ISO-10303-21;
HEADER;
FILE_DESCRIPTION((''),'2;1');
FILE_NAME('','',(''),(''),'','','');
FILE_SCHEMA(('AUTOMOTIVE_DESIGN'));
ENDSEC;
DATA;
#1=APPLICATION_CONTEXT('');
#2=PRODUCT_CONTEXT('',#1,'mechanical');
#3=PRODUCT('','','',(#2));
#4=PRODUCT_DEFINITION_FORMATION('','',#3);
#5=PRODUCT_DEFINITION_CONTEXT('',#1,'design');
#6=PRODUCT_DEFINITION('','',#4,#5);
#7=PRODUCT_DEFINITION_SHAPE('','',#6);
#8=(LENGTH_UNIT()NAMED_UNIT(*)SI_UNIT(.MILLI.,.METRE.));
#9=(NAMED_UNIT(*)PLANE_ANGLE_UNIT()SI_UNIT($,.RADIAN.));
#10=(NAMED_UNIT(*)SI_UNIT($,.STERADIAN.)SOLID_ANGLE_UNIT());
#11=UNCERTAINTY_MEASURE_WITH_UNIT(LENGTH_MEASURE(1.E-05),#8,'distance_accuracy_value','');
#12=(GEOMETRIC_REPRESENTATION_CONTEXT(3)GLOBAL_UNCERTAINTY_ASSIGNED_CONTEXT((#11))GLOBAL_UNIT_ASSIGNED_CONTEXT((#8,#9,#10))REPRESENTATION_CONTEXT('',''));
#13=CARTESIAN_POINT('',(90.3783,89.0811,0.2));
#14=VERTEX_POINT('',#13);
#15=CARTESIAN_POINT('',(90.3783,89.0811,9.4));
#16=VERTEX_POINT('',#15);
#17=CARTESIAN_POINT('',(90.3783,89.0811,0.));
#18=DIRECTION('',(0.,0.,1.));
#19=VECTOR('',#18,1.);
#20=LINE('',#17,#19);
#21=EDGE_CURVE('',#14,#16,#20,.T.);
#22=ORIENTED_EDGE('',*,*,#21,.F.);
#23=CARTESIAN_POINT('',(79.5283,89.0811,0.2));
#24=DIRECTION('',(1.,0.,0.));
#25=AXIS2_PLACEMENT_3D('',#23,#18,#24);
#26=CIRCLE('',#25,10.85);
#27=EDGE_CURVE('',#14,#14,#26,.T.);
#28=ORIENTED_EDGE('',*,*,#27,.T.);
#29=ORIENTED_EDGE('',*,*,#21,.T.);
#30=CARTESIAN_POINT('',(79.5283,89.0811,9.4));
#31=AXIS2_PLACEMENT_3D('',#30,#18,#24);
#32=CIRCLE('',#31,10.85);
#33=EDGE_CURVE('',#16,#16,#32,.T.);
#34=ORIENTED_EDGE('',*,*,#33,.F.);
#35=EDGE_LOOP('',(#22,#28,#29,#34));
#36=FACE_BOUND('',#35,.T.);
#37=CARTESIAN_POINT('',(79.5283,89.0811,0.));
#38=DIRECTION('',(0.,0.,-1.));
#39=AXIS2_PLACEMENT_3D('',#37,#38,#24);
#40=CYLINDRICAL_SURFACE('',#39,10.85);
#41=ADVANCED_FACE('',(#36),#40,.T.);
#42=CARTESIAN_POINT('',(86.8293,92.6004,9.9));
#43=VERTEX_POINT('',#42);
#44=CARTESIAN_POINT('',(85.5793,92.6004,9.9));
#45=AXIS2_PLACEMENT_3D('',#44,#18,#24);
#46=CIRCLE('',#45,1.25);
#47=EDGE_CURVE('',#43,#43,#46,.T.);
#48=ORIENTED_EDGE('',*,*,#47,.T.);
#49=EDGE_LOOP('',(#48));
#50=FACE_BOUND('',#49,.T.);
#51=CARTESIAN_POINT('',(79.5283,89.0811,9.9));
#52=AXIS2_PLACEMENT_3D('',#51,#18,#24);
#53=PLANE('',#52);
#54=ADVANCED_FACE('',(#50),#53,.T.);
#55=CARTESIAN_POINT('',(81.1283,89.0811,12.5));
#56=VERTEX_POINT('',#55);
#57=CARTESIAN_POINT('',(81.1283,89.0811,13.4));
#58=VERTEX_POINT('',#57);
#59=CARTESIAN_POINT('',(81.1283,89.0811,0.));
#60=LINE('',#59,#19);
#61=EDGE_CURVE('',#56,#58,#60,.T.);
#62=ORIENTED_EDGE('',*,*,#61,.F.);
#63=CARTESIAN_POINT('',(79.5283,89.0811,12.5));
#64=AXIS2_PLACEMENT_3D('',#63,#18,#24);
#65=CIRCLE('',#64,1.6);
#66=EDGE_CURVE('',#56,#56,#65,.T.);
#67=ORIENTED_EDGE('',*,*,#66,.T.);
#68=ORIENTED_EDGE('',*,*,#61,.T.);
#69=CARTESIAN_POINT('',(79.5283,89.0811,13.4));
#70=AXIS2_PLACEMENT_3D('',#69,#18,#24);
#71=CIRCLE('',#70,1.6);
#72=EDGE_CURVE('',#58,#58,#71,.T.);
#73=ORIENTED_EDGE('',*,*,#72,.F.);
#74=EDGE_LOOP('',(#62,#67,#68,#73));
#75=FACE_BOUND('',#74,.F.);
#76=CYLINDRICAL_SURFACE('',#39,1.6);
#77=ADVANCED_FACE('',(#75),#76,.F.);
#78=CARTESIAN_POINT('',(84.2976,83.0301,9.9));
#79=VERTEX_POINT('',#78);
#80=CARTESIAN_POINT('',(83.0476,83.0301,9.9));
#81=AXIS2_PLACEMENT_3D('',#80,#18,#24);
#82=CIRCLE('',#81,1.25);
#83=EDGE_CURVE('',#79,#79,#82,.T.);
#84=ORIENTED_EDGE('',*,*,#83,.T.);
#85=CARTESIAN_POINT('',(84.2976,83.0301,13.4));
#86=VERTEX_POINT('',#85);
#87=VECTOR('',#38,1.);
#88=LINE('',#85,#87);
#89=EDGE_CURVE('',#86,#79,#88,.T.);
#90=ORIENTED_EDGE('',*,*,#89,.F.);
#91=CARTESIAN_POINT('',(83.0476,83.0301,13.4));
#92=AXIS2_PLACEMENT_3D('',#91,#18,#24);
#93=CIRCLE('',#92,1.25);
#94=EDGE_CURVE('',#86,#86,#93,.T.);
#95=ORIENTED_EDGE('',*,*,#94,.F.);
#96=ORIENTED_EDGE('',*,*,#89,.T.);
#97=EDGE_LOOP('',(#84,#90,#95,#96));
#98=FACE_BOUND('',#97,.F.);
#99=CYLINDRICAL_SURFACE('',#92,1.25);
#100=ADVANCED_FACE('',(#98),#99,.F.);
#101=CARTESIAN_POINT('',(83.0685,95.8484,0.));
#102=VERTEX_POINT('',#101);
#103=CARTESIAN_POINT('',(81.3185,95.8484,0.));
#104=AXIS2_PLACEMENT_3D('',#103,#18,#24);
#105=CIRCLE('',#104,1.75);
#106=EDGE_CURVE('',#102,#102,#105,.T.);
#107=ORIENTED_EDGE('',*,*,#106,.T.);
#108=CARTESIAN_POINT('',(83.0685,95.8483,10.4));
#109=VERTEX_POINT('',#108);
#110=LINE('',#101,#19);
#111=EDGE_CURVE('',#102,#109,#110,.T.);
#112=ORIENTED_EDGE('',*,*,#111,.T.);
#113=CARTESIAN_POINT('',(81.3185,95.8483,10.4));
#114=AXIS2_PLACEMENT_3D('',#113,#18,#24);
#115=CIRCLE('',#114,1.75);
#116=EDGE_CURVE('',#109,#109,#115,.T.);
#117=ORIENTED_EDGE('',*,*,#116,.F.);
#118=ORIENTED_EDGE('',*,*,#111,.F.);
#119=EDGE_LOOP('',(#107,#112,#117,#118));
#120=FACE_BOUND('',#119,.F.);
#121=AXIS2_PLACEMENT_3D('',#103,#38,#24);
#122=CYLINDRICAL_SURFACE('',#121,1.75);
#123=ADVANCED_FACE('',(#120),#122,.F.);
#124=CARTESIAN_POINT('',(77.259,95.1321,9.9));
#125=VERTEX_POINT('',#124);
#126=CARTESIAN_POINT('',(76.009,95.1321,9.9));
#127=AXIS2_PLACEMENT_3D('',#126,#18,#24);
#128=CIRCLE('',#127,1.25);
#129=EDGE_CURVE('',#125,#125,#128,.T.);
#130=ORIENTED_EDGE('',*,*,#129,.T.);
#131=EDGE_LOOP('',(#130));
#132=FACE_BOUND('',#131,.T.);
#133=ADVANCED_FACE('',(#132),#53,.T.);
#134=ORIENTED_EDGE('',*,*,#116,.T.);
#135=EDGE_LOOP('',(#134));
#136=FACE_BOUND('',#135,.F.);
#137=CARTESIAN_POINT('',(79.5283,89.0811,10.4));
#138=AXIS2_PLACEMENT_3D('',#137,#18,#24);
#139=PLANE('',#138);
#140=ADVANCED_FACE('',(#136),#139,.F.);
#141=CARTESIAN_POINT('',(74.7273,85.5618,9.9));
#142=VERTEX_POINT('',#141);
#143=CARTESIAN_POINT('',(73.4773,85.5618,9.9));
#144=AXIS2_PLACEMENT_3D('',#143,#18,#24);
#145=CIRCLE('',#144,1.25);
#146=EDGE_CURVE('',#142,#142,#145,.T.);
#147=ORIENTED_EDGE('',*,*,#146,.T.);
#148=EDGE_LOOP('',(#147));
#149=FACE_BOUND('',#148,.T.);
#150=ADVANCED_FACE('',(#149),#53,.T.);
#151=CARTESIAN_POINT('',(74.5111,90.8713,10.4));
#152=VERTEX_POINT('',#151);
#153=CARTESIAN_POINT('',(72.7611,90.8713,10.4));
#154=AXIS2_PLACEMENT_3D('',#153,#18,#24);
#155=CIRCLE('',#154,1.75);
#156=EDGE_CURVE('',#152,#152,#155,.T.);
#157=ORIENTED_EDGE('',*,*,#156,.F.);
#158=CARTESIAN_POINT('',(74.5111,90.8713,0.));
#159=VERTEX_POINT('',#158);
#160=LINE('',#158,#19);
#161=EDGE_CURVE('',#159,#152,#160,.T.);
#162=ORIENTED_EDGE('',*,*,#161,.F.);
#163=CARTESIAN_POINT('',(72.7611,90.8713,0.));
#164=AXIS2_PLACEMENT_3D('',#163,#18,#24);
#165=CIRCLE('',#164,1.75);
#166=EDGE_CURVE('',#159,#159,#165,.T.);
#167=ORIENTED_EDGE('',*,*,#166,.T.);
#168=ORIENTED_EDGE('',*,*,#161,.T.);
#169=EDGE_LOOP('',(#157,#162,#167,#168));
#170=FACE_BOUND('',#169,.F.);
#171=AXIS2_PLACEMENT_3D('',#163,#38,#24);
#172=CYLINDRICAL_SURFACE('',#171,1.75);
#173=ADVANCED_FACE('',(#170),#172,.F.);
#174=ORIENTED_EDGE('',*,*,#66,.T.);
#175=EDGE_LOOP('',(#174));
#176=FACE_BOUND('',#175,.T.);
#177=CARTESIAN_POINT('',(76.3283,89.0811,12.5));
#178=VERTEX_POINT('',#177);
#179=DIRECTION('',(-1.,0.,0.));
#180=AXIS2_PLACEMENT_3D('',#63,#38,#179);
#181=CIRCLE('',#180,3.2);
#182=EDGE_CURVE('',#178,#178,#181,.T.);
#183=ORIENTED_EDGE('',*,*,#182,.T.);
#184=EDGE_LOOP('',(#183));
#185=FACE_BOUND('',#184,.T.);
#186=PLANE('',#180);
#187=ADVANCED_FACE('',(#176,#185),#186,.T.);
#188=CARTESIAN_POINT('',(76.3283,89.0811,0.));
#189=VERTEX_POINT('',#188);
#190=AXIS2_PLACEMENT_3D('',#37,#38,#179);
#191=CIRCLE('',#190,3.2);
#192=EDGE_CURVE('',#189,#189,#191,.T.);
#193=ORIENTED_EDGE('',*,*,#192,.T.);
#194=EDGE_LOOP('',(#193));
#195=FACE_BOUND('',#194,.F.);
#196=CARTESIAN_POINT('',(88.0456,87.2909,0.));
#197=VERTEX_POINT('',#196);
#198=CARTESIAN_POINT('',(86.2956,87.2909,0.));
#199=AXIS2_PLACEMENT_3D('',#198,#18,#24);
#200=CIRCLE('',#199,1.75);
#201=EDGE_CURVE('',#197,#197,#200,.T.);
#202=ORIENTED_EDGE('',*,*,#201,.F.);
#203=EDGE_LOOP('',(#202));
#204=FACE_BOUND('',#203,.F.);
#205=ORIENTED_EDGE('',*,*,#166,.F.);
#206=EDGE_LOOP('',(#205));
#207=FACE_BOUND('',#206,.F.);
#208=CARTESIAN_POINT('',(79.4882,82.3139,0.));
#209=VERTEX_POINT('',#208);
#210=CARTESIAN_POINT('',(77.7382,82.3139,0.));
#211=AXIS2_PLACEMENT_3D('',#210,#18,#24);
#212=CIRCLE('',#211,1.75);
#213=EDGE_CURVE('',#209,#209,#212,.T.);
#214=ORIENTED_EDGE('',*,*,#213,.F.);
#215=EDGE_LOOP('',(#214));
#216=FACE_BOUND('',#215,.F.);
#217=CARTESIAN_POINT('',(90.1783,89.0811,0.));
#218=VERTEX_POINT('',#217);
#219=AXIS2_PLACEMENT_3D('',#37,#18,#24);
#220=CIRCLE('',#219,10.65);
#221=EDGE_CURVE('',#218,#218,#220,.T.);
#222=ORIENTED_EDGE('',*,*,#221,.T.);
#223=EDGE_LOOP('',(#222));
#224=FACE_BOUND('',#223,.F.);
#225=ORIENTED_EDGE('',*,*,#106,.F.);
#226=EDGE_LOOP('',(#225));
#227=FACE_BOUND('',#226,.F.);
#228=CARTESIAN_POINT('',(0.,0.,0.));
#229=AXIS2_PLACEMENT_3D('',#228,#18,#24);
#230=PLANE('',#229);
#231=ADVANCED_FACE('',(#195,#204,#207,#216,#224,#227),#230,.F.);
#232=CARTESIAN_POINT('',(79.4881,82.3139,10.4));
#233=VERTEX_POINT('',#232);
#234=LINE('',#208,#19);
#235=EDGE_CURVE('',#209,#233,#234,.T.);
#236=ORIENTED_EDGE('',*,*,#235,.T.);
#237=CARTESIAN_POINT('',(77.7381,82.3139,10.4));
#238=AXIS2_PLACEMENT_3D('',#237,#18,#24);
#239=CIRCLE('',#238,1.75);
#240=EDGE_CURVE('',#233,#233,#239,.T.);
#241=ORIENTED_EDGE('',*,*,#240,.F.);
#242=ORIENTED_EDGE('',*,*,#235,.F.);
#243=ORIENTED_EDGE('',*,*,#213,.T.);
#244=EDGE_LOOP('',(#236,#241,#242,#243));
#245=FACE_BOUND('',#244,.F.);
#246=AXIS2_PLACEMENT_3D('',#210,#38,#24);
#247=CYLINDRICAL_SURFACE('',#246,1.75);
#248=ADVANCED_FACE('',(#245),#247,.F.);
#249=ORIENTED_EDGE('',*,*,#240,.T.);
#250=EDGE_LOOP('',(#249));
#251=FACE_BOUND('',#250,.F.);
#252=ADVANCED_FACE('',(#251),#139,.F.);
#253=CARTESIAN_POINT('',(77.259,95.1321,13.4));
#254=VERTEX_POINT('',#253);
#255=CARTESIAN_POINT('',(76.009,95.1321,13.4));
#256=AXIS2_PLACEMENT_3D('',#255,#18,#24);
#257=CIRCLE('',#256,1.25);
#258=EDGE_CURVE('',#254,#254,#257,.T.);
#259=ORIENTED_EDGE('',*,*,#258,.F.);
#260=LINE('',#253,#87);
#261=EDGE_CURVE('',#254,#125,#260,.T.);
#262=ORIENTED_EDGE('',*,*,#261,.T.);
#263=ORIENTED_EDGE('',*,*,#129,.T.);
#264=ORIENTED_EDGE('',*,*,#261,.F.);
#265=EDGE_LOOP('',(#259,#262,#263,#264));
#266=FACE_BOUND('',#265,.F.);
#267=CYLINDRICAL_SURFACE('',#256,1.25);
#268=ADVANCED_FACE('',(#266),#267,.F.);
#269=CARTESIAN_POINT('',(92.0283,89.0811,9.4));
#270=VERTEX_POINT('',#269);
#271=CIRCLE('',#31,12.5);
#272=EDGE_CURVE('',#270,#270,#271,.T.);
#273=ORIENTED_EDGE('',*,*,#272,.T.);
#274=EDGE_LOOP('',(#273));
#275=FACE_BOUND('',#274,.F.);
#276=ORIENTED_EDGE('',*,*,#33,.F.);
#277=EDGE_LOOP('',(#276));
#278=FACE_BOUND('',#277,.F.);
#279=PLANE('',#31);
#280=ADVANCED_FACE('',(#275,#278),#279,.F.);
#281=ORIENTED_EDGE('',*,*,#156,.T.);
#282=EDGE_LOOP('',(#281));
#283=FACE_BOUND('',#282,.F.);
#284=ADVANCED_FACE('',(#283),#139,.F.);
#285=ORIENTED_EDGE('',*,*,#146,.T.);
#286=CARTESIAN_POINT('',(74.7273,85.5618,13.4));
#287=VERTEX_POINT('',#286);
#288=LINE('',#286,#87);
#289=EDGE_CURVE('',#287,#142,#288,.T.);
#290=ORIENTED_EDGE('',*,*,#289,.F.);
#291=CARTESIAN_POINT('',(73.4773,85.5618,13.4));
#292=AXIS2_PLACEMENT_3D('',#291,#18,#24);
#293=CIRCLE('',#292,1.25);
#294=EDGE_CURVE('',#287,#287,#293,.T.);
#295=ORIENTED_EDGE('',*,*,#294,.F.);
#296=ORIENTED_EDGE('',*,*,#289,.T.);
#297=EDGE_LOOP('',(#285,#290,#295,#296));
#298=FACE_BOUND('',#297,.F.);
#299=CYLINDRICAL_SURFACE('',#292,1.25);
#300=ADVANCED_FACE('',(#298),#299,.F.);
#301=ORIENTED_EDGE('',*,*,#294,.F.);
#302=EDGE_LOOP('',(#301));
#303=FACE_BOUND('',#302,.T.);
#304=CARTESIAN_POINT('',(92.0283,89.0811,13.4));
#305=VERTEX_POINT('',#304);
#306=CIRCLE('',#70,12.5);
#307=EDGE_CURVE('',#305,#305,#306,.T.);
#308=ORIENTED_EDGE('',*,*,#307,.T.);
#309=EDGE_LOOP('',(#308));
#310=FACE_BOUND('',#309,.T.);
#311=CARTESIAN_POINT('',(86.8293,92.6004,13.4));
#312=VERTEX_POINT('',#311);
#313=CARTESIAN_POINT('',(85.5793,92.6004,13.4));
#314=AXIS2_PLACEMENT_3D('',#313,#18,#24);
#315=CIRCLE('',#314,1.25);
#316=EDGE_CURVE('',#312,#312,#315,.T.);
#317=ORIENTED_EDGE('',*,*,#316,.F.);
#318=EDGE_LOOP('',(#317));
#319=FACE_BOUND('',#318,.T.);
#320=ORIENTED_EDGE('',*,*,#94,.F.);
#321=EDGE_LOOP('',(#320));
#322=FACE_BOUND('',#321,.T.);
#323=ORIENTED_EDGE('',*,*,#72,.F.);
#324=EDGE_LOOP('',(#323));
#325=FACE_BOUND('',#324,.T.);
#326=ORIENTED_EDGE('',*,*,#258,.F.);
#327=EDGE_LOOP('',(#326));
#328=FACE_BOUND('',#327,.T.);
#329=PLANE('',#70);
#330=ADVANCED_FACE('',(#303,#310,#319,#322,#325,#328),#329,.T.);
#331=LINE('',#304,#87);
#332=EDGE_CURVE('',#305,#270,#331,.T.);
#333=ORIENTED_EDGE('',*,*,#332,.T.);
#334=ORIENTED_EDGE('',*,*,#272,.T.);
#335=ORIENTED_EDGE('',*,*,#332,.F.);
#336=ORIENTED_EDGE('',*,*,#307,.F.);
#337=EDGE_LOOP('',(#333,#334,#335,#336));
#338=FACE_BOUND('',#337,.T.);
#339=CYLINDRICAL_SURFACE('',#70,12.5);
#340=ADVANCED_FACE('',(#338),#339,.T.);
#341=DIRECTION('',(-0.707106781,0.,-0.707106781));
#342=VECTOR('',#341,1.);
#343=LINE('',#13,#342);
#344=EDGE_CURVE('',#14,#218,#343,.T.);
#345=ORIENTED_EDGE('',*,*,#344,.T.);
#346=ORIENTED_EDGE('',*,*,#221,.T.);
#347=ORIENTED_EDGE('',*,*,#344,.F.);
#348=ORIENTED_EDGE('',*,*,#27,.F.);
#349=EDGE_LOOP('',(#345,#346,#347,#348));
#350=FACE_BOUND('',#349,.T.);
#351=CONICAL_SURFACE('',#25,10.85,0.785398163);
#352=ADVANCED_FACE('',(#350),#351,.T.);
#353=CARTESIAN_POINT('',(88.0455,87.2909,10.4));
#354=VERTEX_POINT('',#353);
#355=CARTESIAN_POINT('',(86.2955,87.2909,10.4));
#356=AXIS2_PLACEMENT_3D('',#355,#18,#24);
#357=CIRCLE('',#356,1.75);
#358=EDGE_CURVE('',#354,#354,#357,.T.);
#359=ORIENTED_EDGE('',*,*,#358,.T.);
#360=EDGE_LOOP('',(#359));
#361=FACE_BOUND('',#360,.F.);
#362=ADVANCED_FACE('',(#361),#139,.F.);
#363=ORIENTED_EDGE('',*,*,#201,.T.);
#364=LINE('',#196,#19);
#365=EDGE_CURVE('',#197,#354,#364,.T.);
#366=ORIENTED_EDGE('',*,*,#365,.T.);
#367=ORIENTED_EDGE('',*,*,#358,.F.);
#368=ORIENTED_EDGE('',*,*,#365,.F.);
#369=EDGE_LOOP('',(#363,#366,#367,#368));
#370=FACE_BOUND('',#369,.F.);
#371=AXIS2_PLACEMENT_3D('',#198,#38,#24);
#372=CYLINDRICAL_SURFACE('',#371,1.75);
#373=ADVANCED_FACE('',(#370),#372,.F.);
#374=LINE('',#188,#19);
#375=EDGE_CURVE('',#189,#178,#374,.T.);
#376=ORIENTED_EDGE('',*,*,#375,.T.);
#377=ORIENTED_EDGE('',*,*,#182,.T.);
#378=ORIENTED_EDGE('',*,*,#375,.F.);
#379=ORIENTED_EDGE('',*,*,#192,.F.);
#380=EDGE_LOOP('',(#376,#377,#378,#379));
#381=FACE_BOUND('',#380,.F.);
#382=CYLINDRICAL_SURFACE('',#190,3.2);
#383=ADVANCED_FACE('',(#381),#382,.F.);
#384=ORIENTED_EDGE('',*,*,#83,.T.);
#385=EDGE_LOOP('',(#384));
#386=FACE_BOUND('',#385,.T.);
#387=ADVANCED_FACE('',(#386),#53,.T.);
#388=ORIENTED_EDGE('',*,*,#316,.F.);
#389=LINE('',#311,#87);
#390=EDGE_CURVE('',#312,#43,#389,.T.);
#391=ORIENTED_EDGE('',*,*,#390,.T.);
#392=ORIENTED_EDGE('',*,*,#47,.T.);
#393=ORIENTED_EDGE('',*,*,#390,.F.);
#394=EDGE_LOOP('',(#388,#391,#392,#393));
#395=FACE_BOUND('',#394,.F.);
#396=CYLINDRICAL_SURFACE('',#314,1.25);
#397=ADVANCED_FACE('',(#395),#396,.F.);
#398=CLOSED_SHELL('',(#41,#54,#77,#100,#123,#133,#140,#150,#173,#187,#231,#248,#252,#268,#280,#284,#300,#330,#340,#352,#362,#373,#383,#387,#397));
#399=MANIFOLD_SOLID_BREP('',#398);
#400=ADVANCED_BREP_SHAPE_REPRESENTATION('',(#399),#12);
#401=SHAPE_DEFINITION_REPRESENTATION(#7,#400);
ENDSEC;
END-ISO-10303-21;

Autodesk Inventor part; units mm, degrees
ref_plane "YZ Plane" through (0, 0, 0) normal (1, 0, 0) x (0, 1, 0)
ref_plane "XZ Plane" through (0, 0, 0) normal (0, 1, 0) x (-1, 0, 0)
ref_plane "XY Plane" through (0, 0, 0) normal (0, 0, 1) x (1, 0, 0)
sketch "스케치1" plane through (0, 0, 0) normal (0, 0, 1) x (1, 0, 0)
  circle A0 centre (77.7382, 82.3139) radius 1.75 projected
  circle A1 centre (72.7611, 90.8713) radius 1.75 projected
  circle A2 centre (86.2956, 87.2909) radius 1.75 projected
  circle A3 centre (81.3185, 95.8484) radius 1.75 projected
  circle A4 centre (79.5283, 89.0811) radius 11.15 projected
  circle A5 centre (79.5283, 89.0811) radius 10.85
  circle A6 centre (79.5283, 89.0811) radius 1.6
  circle A7 centre (79.5283, 89.0811) radius 2.8
  circle A8 centre (79.5283, 89.0811) radius 2.5 projected
  point P0 (0, 0)
  dimension "d0" = 0.3
  dimension "d3" = 3.2
extrude "돌출1" add sketch "스케치1" along normal blind 13.4 contours A5 | A7 | A8
sketch "스케치2" plane through (79.5283, 89.0811, 13.4) normal (0, 0, 1) x (1, 0, 0)
  circle A0 centre (0, 0) radius 10.85 projected
  circle A1 centre (0, 0) radius 12.5
  dimension "d4" = 25
extrude "돌출2" add sketch "스케치2" against normal blind 4
chamfer "모따기1" distance 0.2 angle 45 1 edges at (68.6783, 89.0811, 0)
sketch "스케치3" plane through (79.5283, 89.0811, 0) normal (0, 0, -1) x (-1, 0, 0)
  circle A0 centre (0, 0) radius 1.6 projected
  circle A1 centre (0, 0) radius 10.65 projected
  circle A2 centre (0, 0) radius 3.2
  dimension "d13" = 6.4
extrude "돌출3" cut sketch "스케치3" against normal blind 12.5 contours A2
sketch "스케치5" plane through (79.5283, 89.0811, 13.4) normal (0, 0, 1) x (1, 0, 0)
  circle A0 centre (0, 0) radius 12.5 projected
  circle A1 centre (-1.7902, -6.7672) radius 1.75 projected
  circle A2 centre (-1.7902, -6.7672) radius 1.25
  circle A3 centre (3.5193, -6.051) radius 1.25
  circle A4 centre (6.7672, -1.7902) radius 1.25
  circle A5 centre (6.051, 3.5193) radius 1.25
  circle A6 centre (1.7902, 6.7672) radius 1.25
  circle A7 centre (-3.5193, 6.051) radius 1.25
  circle A8 centre (-6.7672, 1.7902) radius 1.25
  circle A9 centre (-6.051, -3.5193) radius 1.25
  dimension "d18" = 2.5
  dimension "d21" = 360
extrude "돌출5" cut sketch "스케치5" against normal blind 3.5 contours A3 | A5 | A7 | A9
sketch "스케치4" plane through (79.5283, 89.0811, 13.4) normal (0, 0, 1) x (1, 0, 0)
  circle A0 centre (1.7902, 6.7672) radius 1.75 projected
  circle A1 centre (6.7672, -1.7902) radius 1.75 projected
  circle A2 centre (-6.7672, 1.7902) radius 1.75 projected
  circle A3 centre (-1.7902, -6.7672) radius 1.75 projected
extrude "돌출4" add sketch "스케치4" against normal blind 3
properties part number "gear_support" material "고무, 검은색"
